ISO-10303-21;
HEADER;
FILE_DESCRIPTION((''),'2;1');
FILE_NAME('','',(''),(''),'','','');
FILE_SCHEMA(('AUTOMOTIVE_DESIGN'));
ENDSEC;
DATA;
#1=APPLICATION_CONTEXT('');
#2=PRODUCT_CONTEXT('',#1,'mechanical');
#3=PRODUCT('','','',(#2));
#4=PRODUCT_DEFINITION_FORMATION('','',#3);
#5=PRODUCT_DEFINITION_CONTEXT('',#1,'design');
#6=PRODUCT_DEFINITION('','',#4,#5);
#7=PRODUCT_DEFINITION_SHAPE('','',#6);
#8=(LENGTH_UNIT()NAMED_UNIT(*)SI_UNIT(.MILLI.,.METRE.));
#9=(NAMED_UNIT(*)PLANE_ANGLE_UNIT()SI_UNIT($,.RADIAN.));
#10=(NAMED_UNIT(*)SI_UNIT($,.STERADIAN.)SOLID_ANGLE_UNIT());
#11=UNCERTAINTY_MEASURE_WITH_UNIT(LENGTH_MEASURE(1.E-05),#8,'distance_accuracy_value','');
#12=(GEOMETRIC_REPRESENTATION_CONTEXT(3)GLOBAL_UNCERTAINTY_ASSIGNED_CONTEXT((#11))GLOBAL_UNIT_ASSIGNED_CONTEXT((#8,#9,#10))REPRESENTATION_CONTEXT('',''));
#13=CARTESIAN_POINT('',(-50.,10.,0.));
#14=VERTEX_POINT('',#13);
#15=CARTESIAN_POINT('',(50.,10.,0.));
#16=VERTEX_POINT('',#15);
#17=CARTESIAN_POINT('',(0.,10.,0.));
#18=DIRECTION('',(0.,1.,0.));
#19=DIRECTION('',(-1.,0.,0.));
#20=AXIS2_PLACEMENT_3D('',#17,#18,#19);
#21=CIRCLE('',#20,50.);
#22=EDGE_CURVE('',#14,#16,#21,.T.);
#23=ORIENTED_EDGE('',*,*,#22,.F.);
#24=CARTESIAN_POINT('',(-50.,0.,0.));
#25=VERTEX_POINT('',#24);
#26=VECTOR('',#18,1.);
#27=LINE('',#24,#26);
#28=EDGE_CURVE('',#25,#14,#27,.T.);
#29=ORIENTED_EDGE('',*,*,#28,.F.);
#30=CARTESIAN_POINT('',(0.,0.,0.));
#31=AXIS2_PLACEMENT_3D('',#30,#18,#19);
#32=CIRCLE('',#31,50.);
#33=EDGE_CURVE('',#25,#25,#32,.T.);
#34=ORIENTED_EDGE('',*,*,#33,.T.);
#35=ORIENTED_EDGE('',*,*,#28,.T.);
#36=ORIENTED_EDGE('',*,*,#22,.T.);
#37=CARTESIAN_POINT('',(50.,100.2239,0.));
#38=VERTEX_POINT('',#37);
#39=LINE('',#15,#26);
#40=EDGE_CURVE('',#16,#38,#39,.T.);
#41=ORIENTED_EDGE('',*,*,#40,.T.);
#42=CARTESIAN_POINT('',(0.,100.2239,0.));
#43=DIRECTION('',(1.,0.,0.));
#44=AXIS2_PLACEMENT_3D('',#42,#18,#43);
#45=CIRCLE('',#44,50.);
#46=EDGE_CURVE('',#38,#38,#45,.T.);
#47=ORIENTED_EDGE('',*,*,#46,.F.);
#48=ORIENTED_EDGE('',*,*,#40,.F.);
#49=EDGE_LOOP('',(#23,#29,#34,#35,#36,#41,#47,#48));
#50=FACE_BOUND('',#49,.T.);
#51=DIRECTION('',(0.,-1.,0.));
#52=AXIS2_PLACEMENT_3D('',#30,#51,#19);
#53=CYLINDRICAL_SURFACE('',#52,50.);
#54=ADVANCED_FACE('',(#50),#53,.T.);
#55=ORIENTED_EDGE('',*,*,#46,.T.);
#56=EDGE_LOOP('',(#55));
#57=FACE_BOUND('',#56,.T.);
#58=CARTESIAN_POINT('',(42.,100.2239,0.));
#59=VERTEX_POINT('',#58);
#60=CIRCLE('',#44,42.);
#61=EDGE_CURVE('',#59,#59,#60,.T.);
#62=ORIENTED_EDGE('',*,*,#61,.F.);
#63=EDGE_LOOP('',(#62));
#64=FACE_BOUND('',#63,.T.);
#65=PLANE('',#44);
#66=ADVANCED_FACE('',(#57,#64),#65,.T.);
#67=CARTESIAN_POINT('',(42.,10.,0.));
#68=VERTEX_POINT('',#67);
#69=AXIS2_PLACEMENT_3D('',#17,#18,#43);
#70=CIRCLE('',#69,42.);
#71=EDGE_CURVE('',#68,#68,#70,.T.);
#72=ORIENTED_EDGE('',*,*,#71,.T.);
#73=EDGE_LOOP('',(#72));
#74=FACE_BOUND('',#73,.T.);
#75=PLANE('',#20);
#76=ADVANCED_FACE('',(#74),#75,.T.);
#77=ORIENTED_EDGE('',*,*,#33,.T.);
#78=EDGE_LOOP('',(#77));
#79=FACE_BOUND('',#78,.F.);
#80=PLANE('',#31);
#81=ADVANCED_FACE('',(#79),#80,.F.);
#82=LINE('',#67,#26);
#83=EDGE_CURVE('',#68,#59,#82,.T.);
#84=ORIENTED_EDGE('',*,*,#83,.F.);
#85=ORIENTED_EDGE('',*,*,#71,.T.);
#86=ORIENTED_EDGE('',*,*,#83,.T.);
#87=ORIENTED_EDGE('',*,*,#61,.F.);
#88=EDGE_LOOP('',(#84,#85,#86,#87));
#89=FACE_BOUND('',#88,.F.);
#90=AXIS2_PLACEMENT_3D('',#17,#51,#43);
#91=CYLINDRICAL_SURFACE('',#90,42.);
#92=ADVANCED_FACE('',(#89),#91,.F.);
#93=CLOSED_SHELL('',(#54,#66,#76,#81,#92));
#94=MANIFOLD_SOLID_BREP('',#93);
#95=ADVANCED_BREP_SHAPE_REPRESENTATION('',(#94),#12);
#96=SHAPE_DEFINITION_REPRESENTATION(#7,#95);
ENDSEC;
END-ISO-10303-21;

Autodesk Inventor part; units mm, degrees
ref_plane "YZ Plane" through (0, 0, 0) normal (1, 0, 0) x (0, 1, 0)
ref_plane "XZ Plane" through (0, 0, 0) normal (0, 1, 0) x (-1, 0, 0)
ref_plane "XY Plane" through (0, 0, 0) normal (0, 0, 1) x (1, 0, 0)
sketch "Sketch1" plane through (0, 0, 0) normal (0, 1, 0) x (-1, 0, 0)
  circle A0 centre (0, 0) radius 50
  dimension "d0" = 100
extrude "Extrusion1" add sketch "Sketch1" along normal blind 10
sketch "Sketch2" plane through (0, 10, 0) normal (0, 1, 0) x (1, 0, 0)
  circle A0 centre (0, 0) radius 50
  circle A1 centre (0, 0) radius 42
  dimension "d3" = 84
  dimension "d4" = 100
extrude "Extrusion2" add sketch "Sketch2" along normal blind 90.2239
properties part number "Cylinder_500ml"
